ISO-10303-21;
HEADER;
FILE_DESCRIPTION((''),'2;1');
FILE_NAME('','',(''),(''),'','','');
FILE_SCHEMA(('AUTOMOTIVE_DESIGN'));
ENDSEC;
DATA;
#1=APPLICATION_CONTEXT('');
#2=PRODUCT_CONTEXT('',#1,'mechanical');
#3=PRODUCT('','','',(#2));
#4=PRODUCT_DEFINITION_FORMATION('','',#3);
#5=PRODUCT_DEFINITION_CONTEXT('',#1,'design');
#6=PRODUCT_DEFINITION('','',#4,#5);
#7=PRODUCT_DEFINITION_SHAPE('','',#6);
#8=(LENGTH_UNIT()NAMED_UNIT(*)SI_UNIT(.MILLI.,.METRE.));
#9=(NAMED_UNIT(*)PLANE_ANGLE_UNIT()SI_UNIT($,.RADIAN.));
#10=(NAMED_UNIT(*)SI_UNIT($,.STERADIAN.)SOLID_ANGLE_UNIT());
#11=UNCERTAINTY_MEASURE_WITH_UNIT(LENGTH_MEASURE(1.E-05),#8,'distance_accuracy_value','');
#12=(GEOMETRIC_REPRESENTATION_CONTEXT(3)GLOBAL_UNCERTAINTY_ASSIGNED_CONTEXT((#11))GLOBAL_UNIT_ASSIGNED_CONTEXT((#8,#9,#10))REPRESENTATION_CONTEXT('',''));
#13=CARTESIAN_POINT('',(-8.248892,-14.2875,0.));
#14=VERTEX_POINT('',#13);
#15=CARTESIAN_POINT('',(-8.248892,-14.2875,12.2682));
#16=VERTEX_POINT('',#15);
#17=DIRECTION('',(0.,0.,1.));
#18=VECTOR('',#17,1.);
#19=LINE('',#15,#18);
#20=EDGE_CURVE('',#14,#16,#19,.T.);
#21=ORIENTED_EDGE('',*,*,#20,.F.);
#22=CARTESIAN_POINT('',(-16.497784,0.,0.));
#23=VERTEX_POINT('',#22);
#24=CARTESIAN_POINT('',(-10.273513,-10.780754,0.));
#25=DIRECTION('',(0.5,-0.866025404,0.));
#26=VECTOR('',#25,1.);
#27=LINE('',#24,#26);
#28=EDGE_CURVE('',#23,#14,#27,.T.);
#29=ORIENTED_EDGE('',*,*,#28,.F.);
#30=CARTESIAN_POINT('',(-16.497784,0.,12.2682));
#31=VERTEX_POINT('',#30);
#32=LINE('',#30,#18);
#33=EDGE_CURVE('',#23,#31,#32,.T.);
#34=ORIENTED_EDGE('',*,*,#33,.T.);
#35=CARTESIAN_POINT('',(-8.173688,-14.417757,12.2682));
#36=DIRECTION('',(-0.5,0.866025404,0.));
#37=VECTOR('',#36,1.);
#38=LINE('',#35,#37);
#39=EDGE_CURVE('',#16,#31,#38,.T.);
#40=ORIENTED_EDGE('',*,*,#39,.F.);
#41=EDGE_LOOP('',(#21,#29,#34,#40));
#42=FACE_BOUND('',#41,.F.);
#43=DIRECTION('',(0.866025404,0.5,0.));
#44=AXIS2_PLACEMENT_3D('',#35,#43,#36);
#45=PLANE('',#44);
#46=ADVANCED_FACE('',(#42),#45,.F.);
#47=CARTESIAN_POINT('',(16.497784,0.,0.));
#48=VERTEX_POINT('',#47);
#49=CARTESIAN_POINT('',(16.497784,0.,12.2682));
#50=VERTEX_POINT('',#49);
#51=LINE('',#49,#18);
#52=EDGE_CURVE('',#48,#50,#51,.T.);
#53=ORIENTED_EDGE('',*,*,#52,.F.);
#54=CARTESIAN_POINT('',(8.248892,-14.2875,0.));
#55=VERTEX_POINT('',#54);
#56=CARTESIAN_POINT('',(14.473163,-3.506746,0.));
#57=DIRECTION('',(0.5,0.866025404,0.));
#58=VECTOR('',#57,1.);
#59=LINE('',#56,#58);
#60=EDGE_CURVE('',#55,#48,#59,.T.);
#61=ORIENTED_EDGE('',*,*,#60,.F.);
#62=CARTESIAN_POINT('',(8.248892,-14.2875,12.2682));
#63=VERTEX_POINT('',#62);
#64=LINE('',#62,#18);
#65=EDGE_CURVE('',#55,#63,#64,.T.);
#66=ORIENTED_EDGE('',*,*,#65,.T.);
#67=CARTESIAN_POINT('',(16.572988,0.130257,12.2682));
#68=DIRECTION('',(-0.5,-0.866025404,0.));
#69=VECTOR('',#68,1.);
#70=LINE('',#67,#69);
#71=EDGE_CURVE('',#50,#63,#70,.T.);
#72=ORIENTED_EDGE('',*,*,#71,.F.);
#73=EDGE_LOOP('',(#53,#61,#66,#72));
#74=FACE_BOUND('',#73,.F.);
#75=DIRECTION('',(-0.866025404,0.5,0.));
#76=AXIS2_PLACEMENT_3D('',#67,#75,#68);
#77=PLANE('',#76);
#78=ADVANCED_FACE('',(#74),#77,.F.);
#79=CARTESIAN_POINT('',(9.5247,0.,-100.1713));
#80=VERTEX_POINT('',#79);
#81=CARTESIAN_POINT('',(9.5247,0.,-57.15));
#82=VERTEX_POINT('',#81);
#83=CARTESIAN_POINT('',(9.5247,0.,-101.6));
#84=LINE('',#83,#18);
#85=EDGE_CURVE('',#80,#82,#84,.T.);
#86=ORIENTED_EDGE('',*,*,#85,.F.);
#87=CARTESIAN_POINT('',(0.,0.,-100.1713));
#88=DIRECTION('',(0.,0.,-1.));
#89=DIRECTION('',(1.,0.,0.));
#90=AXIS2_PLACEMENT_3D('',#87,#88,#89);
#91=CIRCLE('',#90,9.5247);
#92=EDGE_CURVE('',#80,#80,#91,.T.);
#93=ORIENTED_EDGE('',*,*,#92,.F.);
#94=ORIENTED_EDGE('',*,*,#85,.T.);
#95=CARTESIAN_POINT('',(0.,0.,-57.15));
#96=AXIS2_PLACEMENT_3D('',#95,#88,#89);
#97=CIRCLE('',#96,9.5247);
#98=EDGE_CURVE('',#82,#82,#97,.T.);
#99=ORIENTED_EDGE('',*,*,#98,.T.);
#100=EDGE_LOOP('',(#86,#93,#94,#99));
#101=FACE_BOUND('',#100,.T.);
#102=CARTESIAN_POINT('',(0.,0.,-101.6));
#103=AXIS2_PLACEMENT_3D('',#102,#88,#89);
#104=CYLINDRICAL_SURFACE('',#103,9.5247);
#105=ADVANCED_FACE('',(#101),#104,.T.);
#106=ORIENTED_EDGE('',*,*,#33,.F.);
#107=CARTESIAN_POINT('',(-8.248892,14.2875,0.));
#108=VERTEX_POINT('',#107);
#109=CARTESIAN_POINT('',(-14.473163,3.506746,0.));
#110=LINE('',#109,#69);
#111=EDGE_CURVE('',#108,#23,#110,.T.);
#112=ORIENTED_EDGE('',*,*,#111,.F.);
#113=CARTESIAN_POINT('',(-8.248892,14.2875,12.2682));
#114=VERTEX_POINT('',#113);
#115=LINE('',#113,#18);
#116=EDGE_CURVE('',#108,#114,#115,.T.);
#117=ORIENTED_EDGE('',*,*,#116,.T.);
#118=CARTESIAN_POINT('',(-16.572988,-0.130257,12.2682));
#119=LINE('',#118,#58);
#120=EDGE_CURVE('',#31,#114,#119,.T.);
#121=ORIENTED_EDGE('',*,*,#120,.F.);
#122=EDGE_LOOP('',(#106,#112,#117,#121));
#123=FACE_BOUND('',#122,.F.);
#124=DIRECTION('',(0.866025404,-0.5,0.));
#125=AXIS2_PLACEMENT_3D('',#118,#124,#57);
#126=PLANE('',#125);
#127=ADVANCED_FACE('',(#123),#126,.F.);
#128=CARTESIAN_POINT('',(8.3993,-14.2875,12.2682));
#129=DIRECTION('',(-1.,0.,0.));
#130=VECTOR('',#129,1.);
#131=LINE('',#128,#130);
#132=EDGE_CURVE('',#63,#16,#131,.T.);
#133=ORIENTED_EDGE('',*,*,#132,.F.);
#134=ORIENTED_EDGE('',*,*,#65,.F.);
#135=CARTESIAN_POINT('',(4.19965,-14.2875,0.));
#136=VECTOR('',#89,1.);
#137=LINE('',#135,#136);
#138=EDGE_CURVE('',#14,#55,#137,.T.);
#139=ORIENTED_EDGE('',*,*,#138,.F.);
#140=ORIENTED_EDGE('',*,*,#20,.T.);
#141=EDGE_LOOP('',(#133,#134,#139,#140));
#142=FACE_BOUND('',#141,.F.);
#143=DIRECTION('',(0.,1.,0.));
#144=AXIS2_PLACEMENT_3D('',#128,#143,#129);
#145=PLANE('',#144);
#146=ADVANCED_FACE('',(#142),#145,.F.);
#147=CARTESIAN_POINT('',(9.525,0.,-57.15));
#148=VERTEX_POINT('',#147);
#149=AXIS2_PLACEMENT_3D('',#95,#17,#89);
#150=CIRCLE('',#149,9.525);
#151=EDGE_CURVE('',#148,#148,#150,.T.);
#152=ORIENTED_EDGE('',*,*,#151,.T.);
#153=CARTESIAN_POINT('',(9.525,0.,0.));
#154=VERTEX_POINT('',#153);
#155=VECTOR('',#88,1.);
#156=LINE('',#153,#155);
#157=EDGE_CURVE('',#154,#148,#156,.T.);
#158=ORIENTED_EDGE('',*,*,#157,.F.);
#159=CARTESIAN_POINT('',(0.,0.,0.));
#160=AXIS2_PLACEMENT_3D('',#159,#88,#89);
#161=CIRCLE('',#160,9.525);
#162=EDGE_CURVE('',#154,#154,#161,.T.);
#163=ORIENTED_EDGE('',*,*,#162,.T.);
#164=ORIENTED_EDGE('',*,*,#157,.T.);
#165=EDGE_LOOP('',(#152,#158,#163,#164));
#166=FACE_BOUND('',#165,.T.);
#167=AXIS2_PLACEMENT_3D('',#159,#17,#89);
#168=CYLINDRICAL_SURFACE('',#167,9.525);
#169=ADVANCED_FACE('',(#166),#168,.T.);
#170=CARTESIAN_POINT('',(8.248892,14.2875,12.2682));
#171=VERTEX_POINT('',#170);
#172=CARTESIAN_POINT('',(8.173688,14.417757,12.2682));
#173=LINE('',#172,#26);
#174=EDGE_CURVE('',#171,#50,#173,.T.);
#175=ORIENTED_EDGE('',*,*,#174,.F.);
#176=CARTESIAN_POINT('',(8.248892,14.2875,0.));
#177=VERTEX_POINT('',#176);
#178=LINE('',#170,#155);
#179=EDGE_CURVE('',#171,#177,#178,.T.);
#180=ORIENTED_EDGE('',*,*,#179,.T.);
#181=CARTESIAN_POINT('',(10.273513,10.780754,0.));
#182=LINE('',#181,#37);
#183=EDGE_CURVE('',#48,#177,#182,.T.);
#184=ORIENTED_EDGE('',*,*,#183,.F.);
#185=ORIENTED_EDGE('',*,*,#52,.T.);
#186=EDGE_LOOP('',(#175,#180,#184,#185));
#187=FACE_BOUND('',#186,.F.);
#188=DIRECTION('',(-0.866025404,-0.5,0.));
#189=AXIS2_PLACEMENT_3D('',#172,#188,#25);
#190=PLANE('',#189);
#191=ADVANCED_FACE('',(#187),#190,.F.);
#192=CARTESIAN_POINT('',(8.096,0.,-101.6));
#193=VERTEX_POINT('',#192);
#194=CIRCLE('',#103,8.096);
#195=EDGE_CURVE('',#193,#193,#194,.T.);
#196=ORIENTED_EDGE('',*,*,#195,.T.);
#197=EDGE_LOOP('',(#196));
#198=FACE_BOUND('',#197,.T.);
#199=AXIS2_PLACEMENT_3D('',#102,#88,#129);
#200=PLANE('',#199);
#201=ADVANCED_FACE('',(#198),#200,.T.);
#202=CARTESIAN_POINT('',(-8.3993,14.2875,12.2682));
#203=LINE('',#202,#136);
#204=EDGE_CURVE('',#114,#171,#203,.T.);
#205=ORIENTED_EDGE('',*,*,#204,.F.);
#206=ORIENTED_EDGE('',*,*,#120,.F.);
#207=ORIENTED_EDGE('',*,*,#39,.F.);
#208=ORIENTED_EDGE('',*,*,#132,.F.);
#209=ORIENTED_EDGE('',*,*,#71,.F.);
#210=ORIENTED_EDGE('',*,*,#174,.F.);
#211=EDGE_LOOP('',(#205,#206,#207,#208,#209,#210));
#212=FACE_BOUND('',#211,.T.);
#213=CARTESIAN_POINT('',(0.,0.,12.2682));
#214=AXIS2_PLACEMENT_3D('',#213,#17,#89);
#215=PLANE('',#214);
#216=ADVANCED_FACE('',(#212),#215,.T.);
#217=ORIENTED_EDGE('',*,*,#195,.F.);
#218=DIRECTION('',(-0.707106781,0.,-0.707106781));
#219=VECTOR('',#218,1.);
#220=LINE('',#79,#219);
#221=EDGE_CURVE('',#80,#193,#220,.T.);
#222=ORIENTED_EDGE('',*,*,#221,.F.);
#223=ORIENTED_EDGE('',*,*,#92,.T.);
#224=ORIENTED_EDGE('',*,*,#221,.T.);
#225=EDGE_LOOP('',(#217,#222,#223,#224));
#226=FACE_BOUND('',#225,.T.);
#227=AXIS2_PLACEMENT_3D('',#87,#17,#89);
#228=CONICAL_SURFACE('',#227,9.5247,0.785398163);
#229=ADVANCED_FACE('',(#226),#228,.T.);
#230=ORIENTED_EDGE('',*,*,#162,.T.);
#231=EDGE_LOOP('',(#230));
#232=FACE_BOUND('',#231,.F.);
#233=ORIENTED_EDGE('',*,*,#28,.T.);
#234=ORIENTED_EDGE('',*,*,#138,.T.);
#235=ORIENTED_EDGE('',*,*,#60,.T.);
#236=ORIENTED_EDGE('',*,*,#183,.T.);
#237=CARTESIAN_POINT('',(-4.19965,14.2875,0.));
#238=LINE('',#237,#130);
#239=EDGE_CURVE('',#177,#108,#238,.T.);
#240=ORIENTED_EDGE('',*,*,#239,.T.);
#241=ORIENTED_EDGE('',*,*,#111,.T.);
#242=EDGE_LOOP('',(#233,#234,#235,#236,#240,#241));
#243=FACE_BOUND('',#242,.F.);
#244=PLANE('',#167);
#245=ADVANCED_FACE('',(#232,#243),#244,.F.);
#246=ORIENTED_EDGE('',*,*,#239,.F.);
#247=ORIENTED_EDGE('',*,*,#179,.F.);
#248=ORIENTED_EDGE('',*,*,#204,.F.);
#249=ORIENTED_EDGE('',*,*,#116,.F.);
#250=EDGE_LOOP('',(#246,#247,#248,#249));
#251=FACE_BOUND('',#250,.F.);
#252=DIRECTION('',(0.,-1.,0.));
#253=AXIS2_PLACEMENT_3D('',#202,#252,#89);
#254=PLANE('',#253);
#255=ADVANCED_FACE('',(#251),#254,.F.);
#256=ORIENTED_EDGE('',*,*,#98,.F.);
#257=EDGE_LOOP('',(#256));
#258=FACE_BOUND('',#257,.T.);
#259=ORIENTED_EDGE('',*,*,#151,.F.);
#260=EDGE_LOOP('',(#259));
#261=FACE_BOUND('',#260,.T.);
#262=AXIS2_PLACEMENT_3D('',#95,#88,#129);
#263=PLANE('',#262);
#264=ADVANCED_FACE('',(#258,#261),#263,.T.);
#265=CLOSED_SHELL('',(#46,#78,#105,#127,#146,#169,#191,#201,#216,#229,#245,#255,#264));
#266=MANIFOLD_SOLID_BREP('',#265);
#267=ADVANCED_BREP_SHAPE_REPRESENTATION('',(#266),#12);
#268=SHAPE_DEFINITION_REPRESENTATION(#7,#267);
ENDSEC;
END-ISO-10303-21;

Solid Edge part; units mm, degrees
sketch "Sketch1" plane through (0, 0, 0) normal (0, 0, 1) x (1, 0, 0)
  circle A0 centre (0, 0) radius 16.5735
  dimension "D1" = 33.147
extrude "Protrusion1" add sketch "Sketch1" along normal blind 12.2682
sketch "Sketch2" plane through (0, 0, 0) normal (0, 0, -1) x (1, 0, 0)
  circle A0 centre (0, 0) radius 9.525
extrude "Protrusion2" add sketch "Sketch2" along normal blind 101.6
sketch "Sketch3" plane through (0, 0, -101.6) normal (0, 0, -1) x (1, 0, 0)
  circle A0 centre (0, 0) radius 9.5247
extrude "Cutout1" cut sketch "Sketch3" against normal blind 44.45 flip side to cut
chamfer "Chamfer_1" distance 1.4287 angle 45 1 edges at (-9.5247, 0, -101.6)
sketch "Sketch4" plane through (0, 0, 12.2682) normal (0, 0, 1) x (1, 0, 0)
  line L0 (-8.3993, 14.2875) -> (8.3993, 14.2875)
  dimension "D1" = 28.575
extrude "Cutout2" cut sketch "Sketch4" against normal up to next material side at (0, 14.3375, 12.2682)
pattern_circular "Pattern1" count 6 over 360 about axis through (0, 0, 12.2682) along (0, 0, 1) of "Cutout2"
properties part number "24104024"
